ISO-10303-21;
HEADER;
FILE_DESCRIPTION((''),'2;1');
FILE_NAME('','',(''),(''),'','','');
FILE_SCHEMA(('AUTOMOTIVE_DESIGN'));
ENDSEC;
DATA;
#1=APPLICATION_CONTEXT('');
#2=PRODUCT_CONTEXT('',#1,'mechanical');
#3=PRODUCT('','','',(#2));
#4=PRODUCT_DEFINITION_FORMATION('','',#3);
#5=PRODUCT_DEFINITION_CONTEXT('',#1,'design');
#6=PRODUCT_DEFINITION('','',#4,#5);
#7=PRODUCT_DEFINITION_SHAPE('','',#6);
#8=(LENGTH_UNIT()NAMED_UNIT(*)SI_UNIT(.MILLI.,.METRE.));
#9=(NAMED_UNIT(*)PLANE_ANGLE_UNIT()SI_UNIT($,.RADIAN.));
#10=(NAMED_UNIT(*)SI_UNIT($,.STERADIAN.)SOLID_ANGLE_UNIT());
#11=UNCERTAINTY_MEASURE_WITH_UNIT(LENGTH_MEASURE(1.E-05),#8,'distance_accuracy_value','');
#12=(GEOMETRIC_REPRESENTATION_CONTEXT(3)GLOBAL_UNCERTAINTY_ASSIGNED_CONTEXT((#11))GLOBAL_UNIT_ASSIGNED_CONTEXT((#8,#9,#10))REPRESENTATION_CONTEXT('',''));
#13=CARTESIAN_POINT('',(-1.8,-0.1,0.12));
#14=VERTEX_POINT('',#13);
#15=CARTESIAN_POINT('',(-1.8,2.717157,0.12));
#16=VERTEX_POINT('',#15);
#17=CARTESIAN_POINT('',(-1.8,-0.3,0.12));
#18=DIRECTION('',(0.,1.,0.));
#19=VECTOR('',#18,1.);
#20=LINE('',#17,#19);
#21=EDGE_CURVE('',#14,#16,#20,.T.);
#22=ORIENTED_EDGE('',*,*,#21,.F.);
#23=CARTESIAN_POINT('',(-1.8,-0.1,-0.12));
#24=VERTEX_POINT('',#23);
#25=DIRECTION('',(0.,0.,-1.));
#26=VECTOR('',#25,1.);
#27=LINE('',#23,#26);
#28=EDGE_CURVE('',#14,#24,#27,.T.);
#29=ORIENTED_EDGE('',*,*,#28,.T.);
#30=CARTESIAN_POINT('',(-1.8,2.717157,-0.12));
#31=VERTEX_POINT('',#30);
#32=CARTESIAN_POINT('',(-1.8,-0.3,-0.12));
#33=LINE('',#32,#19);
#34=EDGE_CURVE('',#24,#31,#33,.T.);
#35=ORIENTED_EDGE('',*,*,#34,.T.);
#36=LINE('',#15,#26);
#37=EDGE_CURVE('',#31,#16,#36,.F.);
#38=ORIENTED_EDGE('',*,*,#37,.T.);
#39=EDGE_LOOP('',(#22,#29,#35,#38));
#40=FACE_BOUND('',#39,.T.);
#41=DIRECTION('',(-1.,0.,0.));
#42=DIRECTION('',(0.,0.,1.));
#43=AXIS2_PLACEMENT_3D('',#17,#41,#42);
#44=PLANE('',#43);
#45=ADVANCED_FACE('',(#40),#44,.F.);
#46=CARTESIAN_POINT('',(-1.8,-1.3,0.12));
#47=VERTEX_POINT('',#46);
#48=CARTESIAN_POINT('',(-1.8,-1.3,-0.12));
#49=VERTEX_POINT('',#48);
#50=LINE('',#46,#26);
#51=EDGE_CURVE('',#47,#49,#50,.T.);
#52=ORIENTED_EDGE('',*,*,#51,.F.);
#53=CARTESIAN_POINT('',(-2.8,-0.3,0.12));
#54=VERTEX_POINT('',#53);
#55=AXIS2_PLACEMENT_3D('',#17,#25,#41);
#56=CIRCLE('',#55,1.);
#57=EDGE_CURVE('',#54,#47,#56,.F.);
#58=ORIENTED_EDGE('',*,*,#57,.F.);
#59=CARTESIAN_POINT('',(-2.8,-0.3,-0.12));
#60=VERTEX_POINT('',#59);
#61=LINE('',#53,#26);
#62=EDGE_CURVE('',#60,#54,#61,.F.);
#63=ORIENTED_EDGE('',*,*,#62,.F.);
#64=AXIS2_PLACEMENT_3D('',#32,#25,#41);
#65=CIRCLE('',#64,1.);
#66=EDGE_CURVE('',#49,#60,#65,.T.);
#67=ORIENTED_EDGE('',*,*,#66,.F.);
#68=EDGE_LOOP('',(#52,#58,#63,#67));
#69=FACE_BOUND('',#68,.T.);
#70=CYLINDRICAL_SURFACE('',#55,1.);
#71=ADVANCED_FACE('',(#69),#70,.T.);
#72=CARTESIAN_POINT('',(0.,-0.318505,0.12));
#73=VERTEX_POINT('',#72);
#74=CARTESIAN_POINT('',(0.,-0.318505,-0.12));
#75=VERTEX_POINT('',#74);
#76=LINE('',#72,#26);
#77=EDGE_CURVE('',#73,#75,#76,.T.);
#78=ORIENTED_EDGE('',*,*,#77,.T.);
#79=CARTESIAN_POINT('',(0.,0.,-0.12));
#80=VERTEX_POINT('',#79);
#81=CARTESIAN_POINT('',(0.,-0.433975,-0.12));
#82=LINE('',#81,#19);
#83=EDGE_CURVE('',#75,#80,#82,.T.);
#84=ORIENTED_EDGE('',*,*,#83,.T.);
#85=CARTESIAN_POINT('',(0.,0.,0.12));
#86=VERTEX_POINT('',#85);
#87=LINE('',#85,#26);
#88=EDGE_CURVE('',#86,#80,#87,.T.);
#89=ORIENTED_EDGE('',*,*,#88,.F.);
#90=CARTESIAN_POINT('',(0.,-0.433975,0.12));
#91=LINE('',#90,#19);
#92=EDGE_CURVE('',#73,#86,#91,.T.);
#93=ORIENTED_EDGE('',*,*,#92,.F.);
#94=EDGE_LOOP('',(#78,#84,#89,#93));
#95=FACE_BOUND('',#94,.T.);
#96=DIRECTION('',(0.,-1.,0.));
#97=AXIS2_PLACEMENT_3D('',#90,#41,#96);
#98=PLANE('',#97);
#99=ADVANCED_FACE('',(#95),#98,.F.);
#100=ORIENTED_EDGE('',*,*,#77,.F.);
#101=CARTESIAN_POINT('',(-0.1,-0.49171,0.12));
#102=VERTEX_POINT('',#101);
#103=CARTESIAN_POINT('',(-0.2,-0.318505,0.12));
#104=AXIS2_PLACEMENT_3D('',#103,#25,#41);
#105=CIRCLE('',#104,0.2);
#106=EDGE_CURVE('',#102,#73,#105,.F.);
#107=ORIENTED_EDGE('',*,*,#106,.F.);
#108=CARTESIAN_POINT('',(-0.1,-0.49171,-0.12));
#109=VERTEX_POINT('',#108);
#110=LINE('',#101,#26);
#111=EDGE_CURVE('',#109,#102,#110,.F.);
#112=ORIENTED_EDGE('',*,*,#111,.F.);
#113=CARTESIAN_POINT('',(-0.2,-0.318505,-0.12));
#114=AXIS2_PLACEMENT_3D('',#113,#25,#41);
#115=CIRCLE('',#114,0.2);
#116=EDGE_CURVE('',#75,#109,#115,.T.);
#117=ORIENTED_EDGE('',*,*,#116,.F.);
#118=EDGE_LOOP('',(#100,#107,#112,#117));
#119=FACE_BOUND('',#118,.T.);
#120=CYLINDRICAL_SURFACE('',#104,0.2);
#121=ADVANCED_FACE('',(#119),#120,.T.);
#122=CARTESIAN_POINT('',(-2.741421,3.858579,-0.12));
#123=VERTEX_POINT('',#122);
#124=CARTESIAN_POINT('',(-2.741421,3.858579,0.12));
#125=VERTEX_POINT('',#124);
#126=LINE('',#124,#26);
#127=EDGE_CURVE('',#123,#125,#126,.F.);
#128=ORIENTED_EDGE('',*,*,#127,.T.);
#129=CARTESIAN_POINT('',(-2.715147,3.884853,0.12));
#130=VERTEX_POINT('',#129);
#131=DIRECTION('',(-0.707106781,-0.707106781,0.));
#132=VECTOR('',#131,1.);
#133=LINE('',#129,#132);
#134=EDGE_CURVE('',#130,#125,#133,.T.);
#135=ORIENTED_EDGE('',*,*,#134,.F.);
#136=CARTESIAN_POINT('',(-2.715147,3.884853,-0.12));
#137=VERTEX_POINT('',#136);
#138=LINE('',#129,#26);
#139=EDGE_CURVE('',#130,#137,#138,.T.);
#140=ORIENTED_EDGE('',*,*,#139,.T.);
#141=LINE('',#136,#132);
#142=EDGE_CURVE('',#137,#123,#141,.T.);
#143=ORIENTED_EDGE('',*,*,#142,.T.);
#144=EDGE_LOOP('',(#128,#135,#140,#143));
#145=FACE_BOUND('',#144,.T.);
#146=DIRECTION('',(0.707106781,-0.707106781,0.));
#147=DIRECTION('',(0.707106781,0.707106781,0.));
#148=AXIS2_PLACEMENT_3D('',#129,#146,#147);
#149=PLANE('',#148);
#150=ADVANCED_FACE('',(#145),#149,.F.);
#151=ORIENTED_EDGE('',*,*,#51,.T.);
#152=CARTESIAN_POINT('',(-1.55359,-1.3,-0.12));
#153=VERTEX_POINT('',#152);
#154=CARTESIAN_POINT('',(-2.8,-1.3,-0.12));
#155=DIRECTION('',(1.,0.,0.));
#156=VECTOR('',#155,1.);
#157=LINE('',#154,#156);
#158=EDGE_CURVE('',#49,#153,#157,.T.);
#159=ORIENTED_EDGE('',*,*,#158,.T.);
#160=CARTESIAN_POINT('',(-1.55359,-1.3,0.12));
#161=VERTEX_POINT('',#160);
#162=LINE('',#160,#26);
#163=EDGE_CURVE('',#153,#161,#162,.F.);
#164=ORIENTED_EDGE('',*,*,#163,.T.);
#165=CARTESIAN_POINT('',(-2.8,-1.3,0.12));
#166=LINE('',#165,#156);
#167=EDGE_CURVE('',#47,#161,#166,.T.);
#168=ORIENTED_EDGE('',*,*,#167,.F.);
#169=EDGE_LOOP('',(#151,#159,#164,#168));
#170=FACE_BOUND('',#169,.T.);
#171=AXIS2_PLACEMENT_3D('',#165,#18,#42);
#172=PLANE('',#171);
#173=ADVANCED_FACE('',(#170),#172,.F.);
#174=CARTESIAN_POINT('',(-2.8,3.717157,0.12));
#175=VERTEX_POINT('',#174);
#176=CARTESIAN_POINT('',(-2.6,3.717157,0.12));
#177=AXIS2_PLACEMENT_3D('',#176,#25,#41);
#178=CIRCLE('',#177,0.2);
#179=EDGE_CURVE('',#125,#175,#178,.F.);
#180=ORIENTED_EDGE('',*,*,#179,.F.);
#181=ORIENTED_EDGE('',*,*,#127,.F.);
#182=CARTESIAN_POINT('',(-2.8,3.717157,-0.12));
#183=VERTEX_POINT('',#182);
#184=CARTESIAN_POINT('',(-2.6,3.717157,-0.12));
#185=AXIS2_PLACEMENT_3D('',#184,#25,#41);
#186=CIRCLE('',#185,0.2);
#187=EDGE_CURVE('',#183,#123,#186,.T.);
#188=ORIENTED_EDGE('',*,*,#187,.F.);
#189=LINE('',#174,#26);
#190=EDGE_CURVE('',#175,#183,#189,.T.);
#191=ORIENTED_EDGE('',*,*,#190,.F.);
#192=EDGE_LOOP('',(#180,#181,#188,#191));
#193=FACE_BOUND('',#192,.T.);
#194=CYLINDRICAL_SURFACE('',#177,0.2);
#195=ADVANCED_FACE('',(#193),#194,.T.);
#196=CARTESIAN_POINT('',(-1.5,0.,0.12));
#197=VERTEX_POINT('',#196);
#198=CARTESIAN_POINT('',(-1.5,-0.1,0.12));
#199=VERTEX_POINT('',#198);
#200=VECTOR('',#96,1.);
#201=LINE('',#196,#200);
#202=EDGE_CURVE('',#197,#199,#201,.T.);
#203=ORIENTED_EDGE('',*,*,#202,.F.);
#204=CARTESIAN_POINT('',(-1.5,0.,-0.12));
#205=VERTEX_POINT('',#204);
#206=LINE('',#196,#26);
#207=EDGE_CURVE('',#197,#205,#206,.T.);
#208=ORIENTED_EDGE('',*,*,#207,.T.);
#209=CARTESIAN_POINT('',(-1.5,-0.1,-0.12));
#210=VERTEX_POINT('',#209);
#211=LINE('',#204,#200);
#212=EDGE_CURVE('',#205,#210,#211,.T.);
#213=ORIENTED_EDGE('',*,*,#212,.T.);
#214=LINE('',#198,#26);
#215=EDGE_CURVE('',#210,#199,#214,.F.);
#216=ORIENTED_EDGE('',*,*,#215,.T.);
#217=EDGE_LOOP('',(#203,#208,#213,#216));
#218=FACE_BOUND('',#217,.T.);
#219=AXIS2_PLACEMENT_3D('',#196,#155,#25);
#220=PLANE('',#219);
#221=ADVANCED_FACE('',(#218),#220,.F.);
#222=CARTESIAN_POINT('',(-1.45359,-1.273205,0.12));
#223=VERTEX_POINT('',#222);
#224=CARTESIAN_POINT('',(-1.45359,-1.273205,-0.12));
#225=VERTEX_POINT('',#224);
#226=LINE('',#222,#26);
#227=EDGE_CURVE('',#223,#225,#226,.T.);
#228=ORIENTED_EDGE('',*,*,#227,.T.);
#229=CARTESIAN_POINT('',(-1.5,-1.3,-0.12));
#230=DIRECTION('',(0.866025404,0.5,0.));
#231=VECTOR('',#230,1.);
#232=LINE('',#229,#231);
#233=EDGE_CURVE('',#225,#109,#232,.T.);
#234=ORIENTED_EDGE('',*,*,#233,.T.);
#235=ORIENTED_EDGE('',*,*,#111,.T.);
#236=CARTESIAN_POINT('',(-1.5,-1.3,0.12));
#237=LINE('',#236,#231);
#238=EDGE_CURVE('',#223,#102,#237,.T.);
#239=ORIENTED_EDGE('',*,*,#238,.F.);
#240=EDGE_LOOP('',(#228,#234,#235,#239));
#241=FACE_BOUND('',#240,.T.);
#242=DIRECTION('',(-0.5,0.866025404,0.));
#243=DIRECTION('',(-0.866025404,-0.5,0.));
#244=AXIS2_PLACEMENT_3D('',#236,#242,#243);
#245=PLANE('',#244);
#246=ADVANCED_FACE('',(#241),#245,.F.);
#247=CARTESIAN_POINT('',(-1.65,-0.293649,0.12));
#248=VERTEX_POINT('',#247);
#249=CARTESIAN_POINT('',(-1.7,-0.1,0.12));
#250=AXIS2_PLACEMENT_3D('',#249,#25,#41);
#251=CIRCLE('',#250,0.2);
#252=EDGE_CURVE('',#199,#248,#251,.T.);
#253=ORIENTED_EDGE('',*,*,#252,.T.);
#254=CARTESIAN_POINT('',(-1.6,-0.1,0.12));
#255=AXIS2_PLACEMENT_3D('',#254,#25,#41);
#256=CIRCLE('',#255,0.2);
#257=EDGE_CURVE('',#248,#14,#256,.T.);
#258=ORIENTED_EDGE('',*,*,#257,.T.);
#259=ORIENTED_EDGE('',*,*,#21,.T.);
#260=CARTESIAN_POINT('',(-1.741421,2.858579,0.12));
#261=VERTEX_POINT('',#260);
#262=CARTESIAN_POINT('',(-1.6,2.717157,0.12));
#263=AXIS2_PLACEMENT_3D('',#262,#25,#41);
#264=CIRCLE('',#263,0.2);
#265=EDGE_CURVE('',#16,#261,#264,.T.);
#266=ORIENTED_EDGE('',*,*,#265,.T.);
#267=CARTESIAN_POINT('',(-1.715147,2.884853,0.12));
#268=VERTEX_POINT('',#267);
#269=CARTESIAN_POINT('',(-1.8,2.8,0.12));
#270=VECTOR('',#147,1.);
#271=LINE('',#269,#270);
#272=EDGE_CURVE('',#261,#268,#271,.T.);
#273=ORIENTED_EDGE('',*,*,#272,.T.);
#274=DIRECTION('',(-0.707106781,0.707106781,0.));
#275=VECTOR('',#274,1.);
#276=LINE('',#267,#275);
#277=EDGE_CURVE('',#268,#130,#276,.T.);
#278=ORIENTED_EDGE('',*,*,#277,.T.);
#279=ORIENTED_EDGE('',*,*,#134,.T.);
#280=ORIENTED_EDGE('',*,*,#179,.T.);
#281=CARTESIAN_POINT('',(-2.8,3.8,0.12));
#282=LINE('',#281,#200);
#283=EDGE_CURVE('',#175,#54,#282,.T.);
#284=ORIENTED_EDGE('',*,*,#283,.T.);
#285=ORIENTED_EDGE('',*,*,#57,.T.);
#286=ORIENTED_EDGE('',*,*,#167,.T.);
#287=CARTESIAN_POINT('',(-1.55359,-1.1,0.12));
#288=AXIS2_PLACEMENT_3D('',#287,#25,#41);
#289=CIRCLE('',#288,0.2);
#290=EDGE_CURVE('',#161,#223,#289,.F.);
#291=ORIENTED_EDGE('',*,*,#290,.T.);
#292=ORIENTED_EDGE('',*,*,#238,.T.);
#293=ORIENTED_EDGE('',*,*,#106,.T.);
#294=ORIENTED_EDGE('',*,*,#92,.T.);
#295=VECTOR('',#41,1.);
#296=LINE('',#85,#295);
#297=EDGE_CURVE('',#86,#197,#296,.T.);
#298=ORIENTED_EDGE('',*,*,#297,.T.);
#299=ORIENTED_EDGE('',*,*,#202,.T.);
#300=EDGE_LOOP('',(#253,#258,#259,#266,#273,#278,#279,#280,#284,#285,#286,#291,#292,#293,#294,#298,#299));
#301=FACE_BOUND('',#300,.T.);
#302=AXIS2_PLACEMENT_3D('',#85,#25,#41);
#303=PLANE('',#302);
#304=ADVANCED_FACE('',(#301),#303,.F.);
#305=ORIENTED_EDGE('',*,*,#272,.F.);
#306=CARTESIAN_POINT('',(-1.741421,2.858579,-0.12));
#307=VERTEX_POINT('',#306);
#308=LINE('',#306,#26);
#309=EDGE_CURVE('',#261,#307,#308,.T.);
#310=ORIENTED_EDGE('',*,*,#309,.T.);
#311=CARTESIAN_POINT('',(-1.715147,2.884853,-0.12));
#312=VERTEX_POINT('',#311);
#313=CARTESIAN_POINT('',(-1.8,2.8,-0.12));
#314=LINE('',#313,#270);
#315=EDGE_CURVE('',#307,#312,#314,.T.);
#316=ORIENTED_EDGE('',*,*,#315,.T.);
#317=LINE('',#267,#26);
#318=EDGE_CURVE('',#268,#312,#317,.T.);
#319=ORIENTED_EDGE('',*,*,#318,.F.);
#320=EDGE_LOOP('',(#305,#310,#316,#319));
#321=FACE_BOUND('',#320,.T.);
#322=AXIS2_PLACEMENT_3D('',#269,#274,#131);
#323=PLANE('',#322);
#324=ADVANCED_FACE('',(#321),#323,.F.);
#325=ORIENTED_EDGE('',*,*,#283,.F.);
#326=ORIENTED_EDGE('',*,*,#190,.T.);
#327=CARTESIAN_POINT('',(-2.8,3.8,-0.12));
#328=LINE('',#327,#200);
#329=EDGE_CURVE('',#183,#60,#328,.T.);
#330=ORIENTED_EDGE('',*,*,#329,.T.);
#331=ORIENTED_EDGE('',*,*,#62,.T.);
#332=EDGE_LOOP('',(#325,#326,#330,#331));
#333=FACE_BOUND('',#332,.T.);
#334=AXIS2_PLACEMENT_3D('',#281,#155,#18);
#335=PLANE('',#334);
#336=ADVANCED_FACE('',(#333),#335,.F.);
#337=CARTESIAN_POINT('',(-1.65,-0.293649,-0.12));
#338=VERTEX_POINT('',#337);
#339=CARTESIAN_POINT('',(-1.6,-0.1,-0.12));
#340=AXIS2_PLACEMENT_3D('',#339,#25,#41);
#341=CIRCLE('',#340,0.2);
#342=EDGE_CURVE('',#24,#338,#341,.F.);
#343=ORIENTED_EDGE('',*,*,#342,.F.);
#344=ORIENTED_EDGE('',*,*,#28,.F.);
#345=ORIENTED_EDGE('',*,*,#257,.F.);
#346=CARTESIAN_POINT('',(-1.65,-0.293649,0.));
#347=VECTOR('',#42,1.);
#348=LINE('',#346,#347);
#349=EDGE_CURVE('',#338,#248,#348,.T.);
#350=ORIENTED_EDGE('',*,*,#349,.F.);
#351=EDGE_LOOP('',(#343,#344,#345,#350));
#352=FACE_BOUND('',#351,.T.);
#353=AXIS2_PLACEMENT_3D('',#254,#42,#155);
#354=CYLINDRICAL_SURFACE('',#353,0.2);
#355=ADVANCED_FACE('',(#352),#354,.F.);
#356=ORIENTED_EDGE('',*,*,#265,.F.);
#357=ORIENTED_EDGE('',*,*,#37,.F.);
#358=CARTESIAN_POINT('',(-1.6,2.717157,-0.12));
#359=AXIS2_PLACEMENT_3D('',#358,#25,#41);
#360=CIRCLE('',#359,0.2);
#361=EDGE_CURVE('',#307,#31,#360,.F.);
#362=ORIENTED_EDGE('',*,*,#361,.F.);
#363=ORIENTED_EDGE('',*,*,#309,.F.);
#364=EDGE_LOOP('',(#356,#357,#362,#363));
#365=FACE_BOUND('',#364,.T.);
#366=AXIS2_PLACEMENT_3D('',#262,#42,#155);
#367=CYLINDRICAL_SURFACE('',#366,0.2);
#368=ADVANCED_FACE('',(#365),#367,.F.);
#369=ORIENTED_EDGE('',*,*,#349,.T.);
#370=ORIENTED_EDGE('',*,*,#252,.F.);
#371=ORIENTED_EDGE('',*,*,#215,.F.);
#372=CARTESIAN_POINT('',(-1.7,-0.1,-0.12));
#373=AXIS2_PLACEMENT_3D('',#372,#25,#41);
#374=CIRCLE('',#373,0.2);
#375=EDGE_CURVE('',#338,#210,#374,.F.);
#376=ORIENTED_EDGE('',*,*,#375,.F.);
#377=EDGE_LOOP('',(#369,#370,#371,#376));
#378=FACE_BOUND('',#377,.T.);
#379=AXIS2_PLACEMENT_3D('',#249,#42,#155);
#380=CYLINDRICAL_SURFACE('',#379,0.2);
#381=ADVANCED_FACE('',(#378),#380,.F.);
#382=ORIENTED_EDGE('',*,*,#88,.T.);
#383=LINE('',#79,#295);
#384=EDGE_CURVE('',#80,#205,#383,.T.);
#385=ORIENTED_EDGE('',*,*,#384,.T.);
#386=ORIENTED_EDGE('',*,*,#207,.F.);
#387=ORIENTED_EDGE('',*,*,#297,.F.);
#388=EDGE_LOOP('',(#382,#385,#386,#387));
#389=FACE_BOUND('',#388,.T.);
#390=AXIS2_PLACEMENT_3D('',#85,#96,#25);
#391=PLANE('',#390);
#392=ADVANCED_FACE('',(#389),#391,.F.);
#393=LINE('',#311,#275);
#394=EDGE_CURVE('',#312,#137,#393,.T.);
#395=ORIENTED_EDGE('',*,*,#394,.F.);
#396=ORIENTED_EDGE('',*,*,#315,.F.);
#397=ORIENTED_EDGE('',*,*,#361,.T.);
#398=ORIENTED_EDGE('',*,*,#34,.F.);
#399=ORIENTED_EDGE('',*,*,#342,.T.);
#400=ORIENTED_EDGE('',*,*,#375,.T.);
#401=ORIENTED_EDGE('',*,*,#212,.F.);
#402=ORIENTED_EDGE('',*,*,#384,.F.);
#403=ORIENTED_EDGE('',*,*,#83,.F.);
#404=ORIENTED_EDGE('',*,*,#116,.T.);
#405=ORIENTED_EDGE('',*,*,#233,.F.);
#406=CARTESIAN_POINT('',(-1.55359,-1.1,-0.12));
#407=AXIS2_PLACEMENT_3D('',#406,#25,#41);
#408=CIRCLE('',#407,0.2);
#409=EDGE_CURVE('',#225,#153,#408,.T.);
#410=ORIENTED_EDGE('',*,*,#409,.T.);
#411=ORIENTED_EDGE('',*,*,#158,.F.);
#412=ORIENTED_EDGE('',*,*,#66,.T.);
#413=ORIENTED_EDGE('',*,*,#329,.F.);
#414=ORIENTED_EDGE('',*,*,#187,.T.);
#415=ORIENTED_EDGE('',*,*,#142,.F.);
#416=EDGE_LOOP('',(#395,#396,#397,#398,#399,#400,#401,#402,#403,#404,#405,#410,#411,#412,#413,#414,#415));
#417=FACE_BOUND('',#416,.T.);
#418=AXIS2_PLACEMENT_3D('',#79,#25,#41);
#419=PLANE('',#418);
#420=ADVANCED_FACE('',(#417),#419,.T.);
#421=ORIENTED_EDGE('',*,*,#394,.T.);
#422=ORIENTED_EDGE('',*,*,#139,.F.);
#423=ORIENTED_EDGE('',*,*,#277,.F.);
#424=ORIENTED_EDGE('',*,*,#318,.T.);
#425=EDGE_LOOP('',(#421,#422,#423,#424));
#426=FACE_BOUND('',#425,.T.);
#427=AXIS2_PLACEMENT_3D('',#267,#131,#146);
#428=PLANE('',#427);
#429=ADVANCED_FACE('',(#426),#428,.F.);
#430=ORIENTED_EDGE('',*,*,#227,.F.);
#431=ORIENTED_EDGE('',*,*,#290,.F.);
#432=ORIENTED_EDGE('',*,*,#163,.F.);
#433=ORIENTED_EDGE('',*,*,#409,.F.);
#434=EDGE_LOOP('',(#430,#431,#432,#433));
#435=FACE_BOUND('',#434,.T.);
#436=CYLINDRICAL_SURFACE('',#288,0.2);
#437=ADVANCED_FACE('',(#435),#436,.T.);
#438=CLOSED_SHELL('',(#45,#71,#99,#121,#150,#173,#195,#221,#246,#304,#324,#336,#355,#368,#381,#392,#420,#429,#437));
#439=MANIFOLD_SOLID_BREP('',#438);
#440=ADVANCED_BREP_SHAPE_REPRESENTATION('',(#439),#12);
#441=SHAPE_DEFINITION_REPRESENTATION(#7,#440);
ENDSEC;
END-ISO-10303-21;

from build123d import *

# Parameters (mm, degrees)
BOSS_EXTRUDE1_DEPTH = 0.12
FILLET1_R           = 1
FILLET2_R           = 0.2


with BuildPart() as part:
    # Sketch1 → Boss-Extrude1 (new, symmetric)
    with BuildSketch(Plane.XY):
        Polygon((0, 0), (-1.5, 0), (-1.5, -0.3), (-1.8, -0.3), (-1.8, 2.8), (-1.715147186, 2.884852814), (-2.715147186, 3.884852814), (-2.8, 3.8), (-2.8, -1.3), (-1.5, -1.3), (0, -0.433974596), align=None)
    extrude(amount=BOSS_EXTRUDE1_DEPTH, both=True)

    # Fillet1
    fillet1_edges = [part.edges().sort_by_distance(p)[0] for p in [
        (-2.8, -1.3, 0),
    ]]
    fillet(fillet1_edges, radius=FILLET1_R)

    # Fillet2
    # the kernel refuses this fillet: 0.2 mm, written as the material it adds along each edge
    with BuildSketch(Plane(origin=(-1.8, 2.8, -0.12), x_dir=(0.7071067811865476, 0.7071067811865476, 0), z_dir=(0, 0, 1))) as fillet2_piece_1:
        with BuildLine():
            CenterArc((FILLET2_R * 0.414213562373, -FILLET2_R), FILLET2_R, 90, 45)
            Line((-FILLET2_R * 0.292893218813, -FILLET2_R * 0.292893218813), (0, 0))
            Line((0, 0), (FILLET2_R * 0.414213562373, 0))
        make_face()
    extrude(amount=0.24)
    with BuildSketch(Plane(origin=(-1.5, -0.3, -0.12), x_dir=(-1, 0, 0), z_dir=(0, 0, 1)), Plane(origin=(-1.8, -0.3, -0.12), x_dir=(0, 1, 0), z_dir=(0, 0, 1))) as fillet2_piece_2:
        with BuildLine():
            CenterArc((FILLET2_R, -FILLET2_R), FILLET2_R, 90, 90)
            Line((0, -FILLET2_R), (0, 0))
            Line((0, 0), (FILLET2_R, 0))
        make_face()
    extrude(amount=0.24)
    # the kernel refuses this fillet: 0.2 mm, written as the material it takes off along each edge
    with BuildSketch(Plane(origin=(-2.8, 3.8, -0.327106781), x_dir=(0, -1, 0), z_dir=(0, 0, 1))) as fillet2_2_piece_1:
        with BuildLine():
            CenterArc((FILLET2_R * 0.414213562373, FILLET2_R), FILLET2_R, 225, 45)
            Line((-FILLET2_R * 0.292893218813, FILLET2_R * 0.292893218813), (0, 0))
            Line((0, 0), (FILLET2_R * 0.414213562373, 0))
        make_face()
    extrude(amount=0.654213562, mode=Mode.SUBTRACT)
    with BuildSketch(Plane(origin=(-1.5, -1.3, 0.253974596), x_dir=(-1, 0, 0), z_dir=(0, 0, -1))) as fillet2_2_piece_2:
        with BuildLine():
            CenterArc((FILLET2_R * 0.267949192431, FILLET2_R), FILLET2_R, 240, 30)
            Line((-FILLET2_R * 0.232050807569, FILLET2_R * 0.133974596216), (0, 0))
            Line((0, 0), (FILLET2_R * 0.267949192431, 0))
        make_face()
    extrude(amount=0.507949192, mode=Mode.SUBTRACT)
    with BuildSketch(Plane(origin=(0, -0.433974596, 0.408675135), x_dir=(-0.8660254037844399, -0.4999999999999978, 0), z_dir=(0, 0, -1))) as fillet2_2_piece_3:
        with BuildLine():
            CenterArc((FILLET2_R * 0.57735026919, FILLET2_R), FILLET2_R, 210, 60)
            Line((-FILLET2_R * 0.288675134595, FILLET2_R * 0.5), (0, 0))
            Line((0, 0), (FILLET2_R * 0.57735026919, 0))
        make_face()
    extrude(amount=0.817350269, mode=Mode.SUBTRACT)


solid = part.part
